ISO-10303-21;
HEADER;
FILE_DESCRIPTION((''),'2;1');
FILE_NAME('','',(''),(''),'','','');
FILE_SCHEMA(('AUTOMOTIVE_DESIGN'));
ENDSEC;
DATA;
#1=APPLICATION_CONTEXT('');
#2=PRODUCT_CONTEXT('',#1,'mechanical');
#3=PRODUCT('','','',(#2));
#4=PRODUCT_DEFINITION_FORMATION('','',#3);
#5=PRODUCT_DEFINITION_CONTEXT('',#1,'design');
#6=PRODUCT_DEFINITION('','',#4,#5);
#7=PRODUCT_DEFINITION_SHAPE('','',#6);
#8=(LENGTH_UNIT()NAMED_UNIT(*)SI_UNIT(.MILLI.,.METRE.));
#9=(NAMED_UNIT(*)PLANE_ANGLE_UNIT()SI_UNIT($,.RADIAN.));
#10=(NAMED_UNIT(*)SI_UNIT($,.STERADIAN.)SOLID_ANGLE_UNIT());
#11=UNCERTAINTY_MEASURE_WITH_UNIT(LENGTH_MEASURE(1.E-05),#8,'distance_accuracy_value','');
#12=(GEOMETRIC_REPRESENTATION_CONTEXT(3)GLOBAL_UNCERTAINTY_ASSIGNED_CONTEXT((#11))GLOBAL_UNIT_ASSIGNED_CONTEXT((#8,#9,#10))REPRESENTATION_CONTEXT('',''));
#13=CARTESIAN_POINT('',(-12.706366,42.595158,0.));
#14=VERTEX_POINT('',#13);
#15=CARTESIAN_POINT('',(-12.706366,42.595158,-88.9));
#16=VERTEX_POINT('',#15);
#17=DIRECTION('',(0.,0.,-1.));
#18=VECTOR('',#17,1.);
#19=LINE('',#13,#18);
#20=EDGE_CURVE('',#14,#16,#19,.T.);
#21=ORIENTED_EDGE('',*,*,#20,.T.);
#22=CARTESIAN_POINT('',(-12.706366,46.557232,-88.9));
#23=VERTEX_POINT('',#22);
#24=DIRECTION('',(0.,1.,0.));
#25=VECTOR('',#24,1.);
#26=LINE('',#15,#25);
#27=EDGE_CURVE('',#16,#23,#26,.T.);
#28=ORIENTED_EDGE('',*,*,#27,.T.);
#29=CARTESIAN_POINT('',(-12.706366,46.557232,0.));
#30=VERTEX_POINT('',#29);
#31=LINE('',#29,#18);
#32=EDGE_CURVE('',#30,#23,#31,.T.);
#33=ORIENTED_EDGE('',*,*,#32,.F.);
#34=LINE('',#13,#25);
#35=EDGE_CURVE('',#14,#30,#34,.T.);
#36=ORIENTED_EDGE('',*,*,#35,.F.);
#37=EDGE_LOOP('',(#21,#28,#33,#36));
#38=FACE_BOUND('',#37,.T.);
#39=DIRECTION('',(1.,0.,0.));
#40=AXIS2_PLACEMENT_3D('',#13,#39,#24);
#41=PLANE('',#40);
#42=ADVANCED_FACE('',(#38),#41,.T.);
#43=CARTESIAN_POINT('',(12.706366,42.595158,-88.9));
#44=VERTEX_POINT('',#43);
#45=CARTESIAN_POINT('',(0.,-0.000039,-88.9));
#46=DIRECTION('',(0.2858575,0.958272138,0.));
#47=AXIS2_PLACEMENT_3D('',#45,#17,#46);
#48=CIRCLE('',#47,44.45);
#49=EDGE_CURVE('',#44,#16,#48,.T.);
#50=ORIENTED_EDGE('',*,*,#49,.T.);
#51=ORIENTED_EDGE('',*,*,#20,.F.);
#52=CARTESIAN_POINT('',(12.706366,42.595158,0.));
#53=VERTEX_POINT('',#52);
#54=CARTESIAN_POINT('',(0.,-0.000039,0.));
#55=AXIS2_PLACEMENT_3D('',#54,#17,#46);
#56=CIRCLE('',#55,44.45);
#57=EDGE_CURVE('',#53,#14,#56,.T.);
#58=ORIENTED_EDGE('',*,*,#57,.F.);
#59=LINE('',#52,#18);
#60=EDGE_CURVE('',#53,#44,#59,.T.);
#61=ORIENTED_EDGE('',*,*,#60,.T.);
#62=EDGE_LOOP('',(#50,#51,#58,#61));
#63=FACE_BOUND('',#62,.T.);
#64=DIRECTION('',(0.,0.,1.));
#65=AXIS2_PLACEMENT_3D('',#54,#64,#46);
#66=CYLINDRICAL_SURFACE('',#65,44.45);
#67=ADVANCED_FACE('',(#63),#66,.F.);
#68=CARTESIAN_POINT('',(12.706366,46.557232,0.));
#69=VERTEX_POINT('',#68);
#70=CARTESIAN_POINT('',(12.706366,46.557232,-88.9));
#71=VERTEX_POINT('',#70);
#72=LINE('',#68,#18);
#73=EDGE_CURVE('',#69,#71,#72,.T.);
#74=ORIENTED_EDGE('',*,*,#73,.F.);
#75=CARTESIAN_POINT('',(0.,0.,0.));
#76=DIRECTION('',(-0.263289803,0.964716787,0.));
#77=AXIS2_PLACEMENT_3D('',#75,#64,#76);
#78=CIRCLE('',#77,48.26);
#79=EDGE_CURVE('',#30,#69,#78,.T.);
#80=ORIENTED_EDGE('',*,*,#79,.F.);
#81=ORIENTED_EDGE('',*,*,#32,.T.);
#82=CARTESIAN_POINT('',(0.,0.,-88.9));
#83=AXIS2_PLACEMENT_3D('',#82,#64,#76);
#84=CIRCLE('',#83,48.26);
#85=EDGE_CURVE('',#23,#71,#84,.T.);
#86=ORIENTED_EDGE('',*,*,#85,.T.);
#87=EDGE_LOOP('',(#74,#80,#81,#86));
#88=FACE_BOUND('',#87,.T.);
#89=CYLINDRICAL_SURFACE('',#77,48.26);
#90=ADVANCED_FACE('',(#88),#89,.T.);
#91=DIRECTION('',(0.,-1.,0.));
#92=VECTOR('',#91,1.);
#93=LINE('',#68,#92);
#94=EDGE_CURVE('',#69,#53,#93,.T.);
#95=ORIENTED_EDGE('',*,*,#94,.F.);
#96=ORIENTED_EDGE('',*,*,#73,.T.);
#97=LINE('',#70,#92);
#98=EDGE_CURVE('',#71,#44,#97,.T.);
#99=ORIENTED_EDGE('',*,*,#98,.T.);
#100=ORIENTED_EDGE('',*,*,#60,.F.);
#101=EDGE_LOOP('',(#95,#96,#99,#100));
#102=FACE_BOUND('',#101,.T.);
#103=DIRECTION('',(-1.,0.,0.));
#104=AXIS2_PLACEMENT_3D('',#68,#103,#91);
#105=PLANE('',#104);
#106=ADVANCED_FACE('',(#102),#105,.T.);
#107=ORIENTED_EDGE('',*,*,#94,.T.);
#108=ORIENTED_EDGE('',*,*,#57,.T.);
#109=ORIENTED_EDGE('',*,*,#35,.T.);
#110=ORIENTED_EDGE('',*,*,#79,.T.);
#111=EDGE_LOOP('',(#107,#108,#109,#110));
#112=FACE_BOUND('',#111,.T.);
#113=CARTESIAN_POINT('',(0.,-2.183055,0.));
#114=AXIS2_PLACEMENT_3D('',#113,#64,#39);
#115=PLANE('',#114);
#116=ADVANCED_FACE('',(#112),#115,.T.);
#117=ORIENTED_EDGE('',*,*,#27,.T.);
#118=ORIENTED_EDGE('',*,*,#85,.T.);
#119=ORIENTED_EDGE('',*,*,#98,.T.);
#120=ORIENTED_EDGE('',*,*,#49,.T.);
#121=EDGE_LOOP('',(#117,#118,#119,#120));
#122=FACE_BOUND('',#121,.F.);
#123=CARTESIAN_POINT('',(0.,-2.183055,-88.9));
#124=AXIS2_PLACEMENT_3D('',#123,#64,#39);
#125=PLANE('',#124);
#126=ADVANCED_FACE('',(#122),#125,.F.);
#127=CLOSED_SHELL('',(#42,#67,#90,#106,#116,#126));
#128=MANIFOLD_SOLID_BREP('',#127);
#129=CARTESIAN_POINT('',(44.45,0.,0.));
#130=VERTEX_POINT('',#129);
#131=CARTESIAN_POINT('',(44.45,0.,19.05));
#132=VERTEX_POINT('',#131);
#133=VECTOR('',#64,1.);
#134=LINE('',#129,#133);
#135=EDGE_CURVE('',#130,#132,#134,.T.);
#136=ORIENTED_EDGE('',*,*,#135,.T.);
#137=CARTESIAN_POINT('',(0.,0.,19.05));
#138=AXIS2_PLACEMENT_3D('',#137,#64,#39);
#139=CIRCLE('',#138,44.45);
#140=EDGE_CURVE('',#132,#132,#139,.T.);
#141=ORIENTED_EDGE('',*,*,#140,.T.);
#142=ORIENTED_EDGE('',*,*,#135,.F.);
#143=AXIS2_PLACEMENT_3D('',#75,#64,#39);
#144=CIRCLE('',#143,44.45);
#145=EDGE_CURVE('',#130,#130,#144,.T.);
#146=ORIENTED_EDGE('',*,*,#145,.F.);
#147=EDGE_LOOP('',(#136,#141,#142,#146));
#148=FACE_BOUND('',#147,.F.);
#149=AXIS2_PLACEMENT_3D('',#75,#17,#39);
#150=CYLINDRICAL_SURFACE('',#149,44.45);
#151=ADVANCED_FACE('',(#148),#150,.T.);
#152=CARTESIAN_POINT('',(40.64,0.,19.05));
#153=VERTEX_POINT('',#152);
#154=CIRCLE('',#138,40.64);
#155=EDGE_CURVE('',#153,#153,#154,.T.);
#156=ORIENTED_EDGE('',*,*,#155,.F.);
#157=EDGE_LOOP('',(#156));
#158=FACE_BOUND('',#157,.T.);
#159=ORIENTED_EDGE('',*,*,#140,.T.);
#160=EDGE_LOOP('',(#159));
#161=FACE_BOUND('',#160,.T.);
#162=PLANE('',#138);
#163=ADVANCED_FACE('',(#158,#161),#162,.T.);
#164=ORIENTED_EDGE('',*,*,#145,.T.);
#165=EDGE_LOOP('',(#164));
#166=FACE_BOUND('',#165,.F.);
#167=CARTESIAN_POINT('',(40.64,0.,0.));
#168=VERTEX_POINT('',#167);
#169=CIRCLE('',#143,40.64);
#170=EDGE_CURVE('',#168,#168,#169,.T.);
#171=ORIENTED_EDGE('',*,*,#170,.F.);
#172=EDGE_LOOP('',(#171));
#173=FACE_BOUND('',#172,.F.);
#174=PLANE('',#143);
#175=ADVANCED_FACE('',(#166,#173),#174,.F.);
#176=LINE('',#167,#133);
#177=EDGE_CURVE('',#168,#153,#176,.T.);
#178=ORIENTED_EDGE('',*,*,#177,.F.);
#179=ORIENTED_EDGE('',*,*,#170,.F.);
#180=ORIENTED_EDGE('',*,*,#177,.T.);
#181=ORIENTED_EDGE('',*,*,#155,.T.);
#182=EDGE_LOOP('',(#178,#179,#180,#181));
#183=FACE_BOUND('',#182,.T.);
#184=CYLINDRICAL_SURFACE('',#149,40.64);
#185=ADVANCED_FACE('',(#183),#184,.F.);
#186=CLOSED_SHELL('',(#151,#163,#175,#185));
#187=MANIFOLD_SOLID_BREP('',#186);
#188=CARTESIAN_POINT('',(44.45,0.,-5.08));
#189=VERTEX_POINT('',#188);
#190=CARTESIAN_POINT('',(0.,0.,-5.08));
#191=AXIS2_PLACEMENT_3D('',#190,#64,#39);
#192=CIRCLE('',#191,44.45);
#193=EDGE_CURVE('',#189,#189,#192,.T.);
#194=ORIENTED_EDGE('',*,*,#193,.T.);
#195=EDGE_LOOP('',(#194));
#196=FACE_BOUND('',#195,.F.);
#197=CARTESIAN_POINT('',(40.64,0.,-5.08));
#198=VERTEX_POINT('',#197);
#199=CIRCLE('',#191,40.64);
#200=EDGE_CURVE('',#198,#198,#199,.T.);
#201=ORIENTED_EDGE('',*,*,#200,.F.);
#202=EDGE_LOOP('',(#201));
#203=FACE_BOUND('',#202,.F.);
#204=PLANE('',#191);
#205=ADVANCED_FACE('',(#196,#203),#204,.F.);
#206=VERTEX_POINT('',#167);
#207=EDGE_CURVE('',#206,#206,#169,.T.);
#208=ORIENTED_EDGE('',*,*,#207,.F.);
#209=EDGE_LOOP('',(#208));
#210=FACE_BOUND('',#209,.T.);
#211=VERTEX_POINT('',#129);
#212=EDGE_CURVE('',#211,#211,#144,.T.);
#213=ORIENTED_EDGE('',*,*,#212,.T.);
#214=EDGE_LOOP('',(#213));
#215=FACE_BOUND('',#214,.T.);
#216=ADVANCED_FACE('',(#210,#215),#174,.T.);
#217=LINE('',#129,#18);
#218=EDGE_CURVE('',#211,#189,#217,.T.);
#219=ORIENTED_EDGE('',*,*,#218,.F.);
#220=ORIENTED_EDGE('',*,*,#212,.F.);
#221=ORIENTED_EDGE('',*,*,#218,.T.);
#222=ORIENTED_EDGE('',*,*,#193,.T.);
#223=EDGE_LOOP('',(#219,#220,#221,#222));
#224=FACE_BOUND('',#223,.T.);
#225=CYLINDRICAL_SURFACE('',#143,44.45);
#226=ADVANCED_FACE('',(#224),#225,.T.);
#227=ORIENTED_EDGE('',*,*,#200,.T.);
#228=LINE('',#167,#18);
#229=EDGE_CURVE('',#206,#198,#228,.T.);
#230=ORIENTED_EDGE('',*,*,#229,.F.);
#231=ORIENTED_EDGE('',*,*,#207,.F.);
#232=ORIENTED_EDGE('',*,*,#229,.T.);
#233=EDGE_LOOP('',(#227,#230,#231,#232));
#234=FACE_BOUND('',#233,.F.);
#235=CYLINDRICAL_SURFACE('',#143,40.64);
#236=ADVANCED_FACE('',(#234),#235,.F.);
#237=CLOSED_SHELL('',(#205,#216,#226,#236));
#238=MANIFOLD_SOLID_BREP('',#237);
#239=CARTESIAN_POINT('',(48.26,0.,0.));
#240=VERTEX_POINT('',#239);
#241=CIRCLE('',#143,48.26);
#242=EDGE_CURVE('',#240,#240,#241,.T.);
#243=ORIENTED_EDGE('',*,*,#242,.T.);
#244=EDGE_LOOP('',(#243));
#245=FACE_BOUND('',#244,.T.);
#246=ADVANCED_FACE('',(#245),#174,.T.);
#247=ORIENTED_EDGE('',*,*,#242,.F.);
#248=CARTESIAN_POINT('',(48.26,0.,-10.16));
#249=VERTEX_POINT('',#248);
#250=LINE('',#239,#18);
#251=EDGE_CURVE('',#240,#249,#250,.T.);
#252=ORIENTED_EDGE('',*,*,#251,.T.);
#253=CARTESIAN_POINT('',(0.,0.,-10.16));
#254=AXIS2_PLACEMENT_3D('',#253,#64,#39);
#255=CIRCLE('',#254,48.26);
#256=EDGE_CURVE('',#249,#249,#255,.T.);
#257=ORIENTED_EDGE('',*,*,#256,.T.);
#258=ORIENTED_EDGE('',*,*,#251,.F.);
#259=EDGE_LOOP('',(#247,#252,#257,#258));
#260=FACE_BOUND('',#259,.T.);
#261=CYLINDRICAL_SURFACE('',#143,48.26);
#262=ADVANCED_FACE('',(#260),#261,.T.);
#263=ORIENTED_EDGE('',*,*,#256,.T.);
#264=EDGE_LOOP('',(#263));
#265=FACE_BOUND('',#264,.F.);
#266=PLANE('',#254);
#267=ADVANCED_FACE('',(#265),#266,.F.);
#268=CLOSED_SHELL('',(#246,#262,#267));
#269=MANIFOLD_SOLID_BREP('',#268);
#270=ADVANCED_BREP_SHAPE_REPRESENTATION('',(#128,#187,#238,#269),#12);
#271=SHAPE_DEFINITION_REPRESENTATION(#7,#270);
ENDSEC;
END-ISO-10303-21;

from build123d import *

# Parameters (mm, degrees)
F1_DEPTH = 88.9
F2_R     = 48.26
F2_R_2   = 30.48
F3_DEPTH = 10.16
F4_R     = 44.45
F4_R_2   = 40.64
F5_DEPTH = 19.05
F6_DEPTH = 5.08


# Not quite as in the source:
# - a feature names something its author has since deleted; it is built from what else it names


with BuildPart() as f1:
    # F0 (on Top) → F1 (new body)
    with BuildSketch(Plane.XY):
        with BuildLine():
            ThreePointArc((-12.7063658778, 46.5572321576), (0, -48.26), (12.7063658778, 46.5572321576))
            Line((12.7063658778, 46.5572321576), (12.7063658778, 42.5951579627))
            ThreePointArc((12.7063658778, 42.5951579627), (0, -44.4500385526), (-12.7063658778, 42.5951579627))
            Line((-12.7063658778, 42.5951579627), (-12.7063658778, 46.5572321576))
        make_face()
    extrude(amount=-F1_DEPTH)


with BuildPart() as f3:
    # F2 (on Top) → F3 (new body)
    with BuildSketch(Plane.XY):
        Circle(F2_R)
        Circle(F2_R_2, mode=Mode.SUBTRACT)
        Circle(F2_R_2)
    extrude(amount=-F3_DEPTH)


with BuildPart() as f5:
    # F4 (on Top) → F5 (new body)
    with BuildSketch(Plane.XY):
        Circle(F4_R)
        Circle(F4_R_2, mode=Mode.SUBTRACT)
    extrude(amount=F5_DEPTH)


with BuildPart() as f6:
    # F4 (on Top) → F6 (new body)
    with BuildSketch(Plane.XY):
        Circle(F4_R)
        Circle(F4_R_2, mode=Mode.SUBTRACT)
    extrude(amount=-F6_DEPTH)


solid = Compound([f1.part, f3.part, f5.part, f6.part])
